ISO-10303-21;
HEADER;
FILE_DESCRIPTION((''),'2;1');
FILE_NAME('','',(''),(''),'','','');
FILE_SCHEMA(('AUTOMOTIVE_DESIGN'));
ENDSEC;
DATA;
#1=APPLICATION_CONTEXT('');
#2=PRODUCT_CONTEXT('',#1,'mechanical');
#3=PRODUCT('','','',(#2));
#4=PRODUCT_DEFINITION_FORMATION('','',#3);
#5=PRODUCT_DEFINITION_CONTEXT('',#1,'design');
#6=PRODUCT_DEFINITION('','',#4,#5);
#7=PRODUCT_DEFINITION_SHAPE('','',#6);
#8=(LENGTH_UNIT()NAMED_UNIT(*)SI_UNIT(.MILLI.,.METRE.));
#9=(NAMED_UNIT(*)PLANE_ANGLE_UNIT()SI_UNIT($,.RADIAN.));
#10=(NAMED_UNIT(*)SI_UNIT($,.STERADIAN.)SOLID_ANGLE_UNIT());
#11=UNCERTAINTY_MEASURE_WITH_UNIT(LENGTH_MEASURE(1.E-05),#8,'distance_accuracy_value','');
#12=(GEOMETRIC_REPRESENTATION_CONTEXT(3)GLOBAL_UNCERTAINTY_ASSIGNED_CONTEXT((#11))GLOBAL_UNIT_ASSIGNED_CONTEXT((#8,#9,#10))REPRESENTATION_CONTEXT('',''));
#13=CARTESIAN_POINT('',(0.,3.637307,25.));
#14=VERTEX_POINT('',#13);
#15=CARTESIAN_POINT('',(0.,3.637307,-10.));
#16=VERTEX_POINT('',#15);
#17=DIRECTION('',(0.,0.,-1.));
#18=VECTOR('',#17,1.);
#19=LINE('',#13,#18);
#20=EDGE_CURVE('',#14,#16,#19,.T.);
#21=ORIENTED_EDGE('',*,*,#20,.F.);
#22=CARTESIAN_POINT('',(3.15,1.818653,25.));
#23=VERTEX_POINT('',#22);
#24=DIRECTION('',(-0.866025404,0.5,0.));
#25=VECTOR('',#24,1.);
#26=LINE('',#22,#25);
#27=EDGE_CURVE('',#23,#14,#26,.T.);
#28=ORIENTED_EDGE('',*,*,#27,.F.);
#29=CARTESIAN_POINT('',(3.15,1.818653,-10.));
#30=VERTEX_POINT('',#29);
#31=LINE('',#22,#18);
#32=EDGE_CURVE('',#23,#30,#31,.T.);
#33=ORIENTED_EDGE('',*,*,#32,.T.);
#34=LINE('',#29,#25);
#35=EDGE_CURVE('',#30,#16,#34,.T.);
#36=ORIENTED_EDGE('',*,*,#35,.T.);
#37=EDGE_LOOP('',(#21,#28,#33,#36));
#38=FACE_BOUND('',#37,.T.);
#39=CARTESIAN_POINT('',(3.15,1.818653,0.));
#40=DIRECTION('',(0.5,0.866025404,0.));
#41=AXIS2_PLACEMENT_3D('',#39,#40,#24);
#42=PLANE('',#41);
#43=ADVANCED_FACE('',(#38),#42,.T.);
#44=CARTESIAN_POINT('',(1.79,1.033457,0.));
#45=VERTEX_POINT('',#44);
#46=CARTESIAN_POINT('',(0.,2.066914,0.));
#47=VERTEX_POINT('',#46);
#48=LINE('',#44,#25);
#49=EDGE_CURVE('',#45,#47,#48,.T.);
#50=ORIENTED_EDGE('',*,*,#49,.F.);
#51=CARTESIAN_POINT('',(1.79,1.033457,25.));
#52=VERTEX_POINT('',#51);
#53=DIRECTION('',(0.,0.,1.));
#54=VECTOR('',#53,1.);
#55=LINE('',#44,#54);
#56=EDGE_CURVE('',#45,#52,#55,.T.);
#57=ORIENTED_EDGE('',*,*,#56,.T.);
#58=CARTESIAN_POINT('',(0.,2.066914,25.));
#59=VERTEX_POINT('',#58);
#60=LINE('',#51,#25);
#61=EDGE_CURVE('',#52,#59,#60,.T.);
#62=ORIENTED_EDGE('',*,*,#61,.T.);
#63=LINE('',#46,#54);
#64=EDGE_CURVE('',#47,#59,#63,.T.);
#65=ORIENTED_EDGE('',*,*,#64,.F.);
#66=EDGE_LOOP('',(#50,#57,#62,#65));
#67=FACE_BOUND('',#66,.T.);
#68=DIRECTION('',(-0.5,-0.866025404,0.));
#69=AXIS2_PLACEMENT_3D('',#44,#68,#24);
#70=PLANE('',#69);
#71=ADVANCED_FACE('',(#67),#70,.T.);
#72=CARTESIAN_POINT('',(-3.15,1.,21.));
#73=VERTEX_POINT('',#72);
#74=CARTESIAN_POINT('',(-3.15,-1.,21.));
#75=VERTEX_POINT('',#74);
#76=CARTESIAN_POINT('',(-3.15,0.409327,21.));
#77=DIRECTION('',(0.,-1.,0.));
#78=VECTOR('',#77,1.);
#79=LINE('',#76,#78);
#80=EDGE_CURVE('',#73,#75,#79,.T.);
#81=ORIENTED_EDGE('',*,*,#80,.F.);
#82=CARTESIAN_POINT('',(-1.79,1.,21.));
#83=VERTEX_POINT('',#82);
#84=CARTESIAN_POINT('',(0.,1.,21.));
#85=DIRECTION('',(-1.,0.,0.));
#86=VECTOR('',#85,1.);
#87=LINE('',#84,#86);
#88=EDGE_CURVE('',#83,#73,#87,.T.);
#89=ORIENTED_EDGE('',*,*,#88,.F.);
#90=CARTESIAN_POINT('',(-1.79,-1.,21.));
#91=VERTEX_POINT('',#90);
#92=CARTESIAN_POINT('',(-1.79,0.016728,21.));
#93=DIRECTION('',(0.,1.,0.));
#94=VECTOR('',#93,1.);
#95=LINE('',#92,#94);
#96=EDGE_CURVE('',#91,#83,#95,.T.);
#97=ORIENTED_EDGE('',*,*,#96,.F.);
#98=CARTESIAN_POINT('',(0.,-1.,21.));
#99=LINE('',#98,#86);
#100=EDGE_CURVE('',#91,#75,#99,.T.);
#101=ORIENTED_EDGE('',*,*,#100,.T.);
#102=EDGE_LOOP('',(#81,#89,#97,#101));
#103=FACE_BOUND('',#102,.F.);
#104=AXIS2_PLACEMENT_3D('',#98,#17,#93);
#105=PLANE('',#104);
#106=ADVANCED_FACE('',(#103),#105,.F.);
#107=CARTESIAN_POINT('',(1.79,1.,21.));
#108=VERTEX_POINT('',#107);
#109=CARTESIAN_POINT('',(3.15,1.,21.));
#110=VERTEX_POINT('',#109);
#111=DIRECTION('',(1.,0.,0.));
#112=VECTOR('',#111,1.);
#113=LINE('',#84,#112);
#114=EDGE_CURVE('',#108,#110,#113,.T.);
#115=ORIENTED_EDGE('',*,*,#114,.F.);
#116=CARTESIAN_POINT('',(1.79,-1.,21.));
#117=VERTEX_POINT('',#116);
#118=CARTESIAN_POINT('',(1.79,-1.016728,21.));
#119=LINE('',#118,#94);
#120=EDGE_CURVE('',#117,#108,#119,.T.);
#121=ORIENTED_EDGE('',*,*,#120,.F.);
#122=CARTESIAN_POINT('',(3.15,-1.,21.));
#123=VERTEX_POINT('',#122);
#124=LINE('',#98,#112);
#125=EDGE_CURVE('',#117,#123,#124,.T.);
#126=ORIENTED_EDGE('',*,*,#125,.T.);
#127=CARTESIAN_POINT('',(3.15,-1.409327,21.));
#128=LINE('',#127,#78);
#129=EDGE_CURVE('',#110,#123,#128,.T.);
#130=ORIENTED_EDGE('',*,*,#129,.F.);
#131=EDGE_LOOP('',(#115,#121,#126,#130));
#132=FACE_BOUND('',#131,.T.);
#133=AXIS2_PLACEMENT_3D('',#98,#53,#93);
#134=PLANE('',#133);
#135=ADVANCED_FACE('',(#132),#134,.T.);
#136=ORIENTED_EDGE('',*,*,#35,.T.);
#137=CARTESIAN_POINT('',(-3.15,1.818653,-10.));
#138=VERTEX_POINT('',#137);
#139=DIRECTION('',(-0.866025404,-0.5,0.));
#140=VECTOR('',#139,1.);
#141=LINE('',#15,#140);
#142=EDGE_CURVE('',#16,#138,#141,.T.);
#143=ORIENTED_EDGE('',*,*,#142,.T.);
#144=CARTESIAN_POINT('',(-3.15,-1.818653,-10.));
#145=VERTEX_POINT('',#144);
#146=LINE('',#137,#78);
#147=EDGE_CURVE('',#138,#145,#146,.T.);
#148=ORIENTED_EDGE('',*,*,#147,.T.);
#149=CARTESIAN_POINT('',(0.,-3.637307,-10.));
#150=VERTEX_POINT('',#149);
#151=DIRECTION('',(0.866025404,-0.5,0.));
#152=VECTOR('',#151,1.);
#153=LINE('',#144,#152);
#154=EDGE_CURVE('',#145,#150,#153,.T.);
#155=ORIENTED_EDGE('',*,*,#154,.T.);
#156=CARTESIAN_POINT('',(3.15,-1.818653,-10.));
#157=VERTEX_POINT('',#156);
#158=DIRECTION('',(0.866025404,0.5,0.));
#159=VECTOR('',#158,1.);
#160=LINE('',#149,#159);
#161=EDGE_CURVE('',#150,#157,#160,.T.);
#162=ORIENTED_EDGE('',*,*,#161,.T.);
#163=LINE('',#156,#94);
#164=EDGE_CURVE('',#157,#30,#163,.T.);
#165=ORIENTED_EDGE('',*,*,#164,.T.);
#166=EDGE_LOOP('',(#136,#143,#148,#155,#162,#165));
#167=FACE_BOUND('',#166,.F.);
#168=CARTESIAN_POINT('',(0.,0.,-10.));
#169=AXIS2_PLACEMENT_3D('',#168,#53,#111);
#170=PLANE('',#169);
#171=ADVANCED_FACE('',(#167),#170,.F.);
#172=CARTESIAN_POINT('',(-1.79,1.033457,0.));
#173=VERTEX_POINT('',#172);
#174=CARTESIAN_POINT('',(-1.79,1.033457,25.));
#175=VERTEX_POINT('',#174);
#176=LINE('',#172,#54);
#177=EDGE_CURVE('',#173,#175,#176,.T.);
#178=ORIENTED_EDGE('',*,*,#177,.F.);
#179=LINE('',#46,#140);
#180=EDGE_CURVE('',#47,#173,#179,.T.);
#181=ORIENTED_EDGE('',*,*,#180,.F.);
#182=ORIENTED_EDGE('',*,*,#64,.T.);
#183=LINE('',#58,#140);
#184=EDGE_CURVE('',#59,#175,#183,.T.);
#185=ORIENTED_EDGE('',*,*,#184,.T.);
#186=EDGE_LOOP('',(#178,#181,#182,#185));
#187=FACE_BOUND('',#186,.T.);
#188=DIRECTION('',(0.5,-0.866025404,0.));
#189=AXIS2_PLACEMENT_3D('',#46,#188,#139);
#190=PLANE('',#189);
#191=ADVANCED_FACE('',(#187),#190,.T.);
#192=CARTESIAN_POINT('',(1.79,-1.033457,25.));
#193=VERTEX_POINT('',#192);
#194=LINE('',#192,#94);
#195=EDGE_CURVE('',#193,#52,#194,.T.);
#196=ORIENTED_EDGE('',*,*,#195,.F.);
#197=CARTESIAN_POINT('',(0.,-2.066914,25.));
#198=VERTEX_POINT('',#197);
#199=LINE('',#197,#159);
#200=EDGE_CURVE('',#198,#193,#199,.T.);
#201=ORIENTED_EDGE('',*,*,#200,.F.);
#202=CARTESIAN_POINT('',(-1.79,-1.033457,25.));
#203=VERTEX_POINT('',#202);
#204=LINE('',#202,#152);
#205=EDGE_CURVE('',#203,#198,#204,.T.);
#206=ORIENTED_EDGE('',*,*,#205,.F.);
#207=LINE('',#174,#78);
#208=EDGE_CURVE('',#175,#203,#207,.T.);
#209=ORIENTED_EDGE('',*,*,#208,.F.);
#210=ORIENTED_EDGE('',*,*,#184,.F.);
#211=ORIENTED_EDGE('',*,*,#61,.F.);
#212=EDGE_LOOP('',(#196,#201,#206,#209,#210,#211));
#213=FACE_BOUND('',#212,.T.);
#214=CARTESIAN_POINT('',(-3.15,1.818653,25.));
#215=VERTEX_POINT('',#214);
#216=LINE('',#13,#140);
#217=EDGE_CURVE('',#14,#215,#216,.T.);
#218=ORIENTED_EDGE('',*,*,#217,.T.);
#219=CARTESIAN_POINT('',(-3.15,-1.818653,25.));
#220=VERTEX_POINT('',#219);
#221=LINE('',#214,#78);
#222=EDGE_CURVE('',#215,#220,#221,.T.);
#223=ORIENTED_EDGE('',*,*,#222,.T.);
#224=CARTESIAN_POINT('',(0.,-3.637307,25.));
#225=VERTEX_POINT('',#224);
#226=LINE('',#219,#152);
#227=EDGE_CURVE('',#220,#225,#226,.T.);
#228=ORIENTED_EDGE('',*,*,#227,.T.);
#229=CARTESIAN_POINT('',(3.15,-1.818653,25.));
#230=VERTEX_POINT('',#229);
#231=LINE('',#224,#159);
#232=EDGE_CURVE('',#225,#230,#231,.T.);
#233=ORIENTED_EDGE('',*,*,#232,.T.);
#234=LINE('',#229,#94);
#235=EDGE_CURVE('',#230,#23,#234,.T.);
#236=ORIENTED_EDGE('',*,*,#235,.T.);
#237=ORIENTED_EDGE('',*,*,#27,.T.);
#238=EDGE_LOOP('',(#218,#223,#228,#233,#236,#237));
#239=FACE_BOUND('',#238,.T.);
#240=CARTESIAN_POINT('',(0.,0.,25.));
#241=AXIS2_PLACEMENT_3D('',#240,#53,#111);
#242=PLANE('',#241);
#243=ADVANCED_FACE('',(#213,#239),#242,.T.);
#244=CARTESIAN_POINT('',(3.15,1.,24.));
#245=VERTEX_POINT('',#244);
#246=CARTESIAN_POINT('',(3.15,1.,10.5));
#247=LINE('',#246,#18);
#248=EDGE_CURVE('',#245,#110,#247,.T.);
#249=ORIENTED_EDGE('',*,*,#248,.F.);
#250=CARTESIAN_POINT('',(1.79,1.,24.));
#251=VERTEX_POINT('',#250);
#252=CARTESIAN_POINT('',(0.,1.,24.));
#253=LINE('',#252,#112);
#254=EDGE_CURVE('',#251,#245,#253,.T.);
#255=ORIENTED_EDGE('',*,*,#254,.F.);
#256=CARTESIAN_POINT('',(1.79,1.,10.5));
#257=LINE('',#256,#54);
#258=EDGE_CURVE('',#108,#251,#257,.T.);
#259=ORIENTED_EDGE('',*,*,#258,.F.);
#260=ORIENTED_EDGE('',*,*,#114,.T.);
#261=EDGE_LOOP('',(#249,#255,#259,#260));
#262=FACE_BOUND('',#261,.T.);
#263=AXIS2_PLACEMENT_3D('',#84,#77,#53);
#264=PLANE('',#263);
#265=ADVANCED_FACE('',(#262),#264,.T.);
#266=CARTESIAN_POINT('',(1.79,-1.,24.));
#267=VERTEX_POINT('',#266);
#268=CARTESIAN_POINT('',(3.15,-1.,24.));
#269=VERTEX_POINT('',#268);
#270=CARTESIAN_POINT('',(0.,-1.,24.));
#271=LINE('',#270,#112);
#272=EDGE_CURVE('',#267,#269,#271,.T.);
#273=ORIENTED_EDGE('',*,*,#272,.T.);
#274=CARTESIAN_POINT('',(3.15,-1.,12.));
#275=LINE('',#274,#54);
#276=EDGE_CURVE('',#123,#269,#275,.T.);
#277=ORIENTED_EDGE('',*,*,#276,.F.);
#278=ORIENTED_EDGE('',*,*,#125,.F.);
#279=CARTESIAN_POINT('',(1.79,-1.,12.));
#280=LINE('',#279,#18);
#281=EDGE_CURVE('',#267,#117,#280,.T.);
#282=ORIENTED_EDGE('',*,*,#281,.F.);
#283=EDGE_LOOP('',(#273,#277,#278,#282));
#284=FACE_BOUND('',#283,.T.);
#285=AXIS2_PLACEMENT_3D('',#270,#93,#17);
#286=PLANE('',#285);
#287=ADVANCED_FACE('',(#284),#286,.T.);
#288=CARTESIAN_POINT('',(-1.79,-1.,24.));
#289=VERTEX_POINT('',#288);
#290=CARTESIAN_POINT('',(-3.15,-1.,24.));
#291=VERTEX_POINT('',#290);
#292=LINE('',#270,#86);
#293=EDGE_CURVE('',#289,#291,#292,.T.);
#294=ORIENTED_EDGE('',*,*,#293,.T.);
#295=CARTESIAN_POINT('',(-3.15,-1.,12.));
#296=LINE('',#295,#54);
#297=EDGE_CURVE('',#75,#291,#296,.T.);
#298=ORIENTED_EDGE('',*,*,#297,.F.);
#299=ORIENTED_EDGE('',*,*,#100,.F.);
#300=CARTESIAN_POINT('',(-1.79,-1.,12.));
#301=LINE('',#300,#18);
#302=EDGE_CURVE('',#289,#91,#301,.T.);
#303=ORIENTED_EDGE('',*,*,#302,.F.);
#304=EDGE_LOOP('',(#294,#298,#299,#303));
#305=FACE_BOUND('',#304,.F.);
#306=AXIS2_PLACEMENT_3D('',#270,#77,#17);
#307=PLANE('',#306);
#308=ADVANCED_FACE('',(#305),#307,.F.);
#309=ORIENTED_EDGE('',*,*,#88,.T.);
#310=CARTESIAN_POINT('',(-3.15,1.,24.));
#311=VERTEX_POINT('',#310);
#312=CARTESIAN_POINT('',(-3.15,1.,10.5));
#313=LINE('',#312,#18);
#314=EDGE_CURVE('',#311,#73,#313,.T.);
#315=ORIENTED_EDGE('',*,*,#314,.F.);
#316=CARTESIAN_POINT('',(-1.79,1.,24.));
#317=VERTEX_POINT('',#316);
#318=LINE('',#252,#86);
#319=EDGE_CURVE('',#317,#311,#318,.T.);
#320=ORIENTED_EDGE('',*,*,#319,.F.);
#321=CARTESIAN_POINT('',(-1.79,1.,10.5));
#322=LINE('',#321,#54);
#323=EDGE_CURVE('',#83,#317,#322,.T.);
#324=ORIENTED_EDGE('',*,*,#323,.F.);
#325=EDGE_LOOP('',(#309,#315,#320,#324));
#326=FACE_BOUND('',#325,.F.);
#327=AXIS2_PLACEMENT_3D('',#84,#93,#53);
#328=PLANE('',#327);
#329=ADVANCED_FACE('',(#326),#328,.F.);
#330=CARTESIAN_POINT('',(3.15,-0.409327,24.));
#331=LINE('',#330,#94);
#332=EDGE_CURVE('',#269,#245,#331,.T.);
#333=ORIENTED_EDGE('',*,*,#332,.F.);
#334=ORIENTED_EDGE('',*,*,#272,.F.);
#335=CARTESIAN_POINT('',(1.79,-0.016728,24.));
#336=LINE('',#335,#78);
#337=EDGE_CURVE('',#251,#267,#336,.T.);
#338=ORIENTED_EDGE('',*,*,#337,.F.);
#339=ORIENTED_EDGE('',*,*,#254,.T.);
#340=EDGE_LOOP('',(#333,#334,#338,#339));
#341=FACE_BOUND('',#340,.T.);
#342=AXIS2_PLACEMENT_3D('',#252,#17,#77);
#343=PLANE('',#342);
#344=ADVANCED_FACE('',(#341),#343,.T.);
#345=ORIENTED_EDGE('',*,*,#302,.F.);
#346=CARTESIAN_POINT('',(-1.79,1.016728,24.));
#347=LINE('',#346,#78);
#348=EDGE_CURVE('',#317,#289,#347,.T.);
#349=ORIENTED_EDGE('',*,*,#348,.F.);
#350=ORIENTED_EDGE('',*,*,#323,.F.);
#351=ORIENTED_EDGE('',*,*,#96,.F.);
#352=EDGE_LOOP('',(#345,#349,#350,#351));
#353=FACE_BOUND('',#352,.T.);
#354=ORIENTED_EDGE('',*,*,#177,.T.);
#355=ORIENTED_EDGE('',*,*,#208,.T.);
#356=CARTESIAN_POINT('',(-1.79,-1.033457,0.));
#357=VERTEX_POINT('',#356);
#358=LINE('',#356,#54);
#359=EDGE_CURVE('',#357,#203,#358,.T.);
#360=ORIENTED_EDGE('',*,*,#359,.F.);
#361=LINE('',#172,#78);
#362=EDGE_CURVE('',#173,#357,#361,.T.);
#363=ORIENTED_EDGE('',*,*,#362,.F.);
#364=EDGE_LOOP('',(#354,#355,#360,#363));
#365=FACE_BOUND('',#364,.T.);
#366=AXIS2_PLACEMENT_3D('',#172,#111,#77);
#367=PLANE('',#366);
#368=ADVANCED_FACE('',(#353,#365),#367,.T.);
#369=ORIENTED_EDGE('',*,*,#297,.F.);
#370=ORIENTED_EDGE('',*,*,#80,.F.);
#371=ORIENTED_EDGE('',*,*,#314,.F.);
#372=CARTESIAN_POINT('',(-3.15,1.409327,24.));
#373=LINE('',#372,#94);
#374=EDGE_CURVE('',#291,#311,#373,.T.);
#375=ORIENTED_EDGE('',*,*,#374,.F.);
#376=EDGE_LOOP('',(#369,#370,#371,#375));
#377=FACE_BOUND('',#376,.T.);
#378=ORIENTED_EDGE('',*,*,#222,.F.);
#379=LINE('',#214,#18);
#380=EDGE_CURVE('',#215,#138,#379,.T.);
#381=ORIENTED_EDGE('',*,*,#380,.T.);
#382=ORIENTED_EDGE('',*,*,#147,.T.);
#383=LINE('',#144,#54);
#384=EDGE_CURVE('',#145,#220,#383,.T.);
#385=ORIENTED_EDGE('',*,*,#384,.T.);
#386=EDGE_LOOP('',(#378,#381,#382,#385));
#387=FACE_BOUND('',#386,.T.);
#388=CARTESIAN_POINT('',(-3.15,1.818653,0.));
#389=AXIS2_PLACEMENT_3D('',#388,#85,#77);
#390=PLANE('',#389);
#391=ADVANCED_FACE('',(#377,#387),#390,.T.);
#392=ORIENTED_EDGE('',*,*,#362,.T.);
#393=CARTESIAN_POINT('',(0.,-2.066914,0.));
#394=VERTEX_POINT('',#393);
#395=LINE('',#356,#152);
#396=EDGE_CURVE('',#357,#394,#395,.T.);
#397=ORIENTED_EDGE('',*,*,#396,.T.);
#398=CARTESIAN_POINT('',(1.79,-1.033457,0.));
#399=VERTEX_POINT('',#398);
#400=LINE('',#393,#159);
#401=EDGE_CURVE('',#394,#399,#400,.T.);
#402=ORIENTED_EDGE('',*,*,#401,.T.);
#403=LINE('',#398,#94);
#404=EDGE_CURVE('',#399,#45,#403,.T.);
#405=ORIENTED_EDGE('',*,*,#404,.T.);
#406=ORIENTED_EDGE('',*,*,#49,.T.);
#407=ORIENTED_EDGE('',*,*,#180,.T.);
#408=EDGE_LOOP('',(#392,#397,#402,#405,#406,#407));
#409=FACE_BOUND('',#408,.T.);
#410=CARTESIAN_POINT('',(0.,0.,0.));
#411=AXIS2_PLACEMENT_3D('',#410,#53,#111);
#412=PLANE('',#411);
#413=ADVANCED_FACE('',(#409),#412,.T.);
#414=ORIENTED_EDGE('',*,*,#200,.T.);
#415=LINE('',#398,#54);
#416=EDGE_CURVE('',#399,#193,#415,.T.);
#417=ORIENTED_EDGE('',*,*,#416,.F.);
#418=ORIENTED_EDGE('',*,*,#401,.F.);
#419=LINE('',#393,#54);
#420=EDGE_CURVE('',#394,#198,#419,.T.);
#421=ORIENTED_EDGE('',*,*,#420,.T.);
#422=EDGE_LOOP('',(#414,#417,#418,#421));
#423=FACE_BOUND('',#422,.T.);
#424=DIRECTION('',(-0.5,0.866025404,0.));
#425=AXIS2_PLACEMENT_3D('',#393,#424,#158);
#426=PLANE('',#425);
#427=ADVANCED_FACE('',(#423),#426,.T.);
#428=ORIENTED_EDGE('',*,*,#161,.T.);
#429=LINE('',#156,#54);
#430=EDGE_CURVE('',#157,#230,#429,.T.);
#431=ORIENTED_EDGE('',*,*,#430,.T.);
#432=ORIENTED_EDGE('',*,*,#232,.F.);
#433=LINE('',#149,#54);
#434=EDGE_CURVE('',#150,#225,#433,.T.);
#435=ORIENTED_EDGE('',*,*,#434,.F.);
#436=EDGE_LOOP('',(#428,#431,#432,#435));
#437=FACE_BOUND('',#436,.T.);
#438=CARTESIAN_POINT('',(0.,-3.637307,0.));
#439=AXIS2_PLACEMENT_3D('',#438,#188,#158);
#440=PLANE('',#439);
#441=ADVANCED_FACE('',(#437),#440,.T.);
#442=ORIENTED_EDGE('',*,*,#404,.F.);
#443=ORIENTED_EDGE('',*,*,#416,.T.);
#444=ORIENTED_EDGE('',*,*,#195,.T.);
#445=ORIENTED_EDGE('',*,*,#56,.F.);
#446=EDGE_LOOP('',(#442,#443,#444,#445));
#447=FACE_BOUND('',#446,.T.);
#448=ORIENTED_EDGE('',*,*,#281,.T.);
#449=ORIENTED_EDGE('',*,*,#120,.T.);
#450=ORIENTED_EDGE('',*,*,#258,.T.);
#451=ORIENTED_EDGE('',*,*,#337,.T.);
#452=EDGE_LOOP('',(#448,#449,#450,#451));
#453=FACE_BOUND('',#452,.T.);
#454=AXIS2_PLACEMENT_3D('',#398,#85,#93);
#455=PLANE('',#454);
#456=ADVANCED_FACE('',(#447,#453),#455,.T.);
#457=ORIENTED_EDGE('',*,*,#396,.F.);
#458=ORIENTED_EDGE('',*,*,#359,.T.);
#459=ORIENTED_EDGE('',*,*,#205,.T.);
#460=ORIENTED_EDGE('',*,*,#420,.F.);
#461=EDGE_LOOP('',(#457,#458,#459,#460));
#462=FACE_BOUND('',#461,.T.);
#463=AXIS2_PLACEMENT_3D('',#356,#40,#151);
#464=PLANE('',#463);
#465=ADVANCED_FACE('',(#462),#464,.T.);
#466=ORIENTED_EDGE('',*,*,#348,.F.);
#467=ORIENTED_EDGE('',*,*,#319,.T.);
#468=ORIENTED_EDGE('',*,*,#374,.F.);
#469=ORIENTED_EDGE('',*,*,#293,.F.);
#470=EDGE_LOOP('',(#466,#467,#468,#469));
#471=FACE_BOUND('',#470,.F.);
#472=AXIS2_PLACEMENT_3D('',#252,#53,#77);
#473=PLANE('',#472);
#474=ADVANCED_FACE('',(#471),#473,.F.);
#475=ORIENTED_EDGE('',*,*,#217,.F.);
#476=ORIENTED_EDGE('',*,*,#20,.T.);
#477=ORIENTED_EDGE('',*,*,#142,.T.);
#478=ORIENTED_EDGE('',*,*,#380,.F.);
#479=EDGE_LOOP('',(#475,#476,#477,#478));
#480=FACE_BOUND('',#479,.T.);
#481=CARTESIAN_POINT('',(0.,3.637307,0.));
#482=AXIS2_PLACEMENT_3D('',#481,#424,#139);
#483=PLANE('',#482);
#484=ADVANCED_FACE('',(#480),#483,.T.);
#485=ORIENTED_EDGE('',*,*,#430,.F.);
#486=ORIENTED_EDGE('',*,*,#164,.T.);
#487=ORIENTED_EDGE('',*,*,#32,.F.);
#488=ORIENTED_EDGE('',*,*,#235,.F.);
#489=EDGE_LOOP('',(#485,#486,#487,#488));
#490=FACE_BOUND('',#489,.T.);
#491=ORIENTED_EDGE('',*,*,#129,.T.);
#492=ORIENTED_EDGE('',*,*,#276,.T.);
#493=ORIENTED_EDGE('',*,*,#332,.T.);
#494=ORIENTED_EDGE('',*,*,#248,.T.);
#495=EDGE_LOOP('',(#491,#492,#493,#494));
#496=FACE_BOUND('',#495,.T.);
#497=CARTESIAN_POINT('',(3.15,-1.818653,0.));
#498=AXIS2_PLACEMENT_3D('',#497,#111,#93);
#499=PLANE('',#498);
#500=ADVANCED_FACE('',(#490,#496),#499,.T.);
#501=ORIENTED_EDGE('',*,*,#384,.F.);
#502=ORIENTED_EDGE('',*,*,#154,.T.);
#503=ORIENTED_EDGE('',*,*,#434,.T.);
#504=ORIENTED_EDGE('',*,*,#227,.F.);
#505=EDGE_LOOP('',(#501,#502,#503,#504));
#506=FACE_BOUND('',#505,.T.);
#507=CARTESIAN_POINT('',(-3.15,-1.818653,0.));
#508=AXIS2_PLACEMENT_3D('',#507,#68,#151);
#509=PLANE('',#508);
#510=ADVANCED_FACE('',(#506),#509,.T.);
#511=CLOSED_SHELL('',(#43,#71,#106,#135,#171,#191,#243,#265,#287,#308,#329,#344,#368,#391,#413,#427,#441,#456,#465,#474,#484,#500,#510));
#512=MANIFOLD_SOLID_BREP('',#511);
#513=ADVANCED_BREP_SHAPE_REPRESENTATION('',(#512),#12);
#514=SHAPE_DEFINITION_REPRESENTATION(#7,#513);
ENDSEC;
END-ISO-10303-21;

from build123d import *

# Parameters (mm, degrees)
F1_DEPTH      = 25
F1_DEPTH_BACK = 10
F3_DEPTH      = 25
F5_DEPTH      = 13.6
F5_DEPTH_BACK = 25


with BuildPart() as f1:
    # F0 (on Top) → F1 (new body, two sides)
    with BuildSketch(Plane.XY) as f1_sk:
        Polygon((-3.15, 1.8186533479), (-3.15, -1.8186533479), (0, -3.6373066959), (3.15, -1.8186533479), (3.15, 1.8186533479), (0, 3.6373066959), align=None)
    extrude(amount=F1_DEPTH)
    extrude(f1_sk.sketch, amount=-F1_DEPTH_BACK)

    # F2 (on Top) → F3 (cut)
    with BuildSketch(Plane.XY):
        Polygon((-1.79, 1.0334569818), (-1.79, -1.0334569818), (0, -2.0669139637), (1.79, -1.0334569818), (1.79, 1.0334569818), (0, 2.0669139637), align=None)
    extrude(amount=F3_DEPTH, mode=Mode.SUBTRACT)

    # F4 (on Right) → F5 (cut, two sides)
    with BuildSketch(Plane.YZ) as f5_sk:
        Polygon((-1, 21), (0, 21), (1, 21), (1, 24), (0, 24), (-1, 24), align=None)
    extrude(amount=-F5_DEPTH, mode=Mode.SUBTRACT)
    extrude(f5_sk.sketch, amount=F5_DEPTH_BACK, mode=Mode.SUBTRACT)


solid = f1.part
